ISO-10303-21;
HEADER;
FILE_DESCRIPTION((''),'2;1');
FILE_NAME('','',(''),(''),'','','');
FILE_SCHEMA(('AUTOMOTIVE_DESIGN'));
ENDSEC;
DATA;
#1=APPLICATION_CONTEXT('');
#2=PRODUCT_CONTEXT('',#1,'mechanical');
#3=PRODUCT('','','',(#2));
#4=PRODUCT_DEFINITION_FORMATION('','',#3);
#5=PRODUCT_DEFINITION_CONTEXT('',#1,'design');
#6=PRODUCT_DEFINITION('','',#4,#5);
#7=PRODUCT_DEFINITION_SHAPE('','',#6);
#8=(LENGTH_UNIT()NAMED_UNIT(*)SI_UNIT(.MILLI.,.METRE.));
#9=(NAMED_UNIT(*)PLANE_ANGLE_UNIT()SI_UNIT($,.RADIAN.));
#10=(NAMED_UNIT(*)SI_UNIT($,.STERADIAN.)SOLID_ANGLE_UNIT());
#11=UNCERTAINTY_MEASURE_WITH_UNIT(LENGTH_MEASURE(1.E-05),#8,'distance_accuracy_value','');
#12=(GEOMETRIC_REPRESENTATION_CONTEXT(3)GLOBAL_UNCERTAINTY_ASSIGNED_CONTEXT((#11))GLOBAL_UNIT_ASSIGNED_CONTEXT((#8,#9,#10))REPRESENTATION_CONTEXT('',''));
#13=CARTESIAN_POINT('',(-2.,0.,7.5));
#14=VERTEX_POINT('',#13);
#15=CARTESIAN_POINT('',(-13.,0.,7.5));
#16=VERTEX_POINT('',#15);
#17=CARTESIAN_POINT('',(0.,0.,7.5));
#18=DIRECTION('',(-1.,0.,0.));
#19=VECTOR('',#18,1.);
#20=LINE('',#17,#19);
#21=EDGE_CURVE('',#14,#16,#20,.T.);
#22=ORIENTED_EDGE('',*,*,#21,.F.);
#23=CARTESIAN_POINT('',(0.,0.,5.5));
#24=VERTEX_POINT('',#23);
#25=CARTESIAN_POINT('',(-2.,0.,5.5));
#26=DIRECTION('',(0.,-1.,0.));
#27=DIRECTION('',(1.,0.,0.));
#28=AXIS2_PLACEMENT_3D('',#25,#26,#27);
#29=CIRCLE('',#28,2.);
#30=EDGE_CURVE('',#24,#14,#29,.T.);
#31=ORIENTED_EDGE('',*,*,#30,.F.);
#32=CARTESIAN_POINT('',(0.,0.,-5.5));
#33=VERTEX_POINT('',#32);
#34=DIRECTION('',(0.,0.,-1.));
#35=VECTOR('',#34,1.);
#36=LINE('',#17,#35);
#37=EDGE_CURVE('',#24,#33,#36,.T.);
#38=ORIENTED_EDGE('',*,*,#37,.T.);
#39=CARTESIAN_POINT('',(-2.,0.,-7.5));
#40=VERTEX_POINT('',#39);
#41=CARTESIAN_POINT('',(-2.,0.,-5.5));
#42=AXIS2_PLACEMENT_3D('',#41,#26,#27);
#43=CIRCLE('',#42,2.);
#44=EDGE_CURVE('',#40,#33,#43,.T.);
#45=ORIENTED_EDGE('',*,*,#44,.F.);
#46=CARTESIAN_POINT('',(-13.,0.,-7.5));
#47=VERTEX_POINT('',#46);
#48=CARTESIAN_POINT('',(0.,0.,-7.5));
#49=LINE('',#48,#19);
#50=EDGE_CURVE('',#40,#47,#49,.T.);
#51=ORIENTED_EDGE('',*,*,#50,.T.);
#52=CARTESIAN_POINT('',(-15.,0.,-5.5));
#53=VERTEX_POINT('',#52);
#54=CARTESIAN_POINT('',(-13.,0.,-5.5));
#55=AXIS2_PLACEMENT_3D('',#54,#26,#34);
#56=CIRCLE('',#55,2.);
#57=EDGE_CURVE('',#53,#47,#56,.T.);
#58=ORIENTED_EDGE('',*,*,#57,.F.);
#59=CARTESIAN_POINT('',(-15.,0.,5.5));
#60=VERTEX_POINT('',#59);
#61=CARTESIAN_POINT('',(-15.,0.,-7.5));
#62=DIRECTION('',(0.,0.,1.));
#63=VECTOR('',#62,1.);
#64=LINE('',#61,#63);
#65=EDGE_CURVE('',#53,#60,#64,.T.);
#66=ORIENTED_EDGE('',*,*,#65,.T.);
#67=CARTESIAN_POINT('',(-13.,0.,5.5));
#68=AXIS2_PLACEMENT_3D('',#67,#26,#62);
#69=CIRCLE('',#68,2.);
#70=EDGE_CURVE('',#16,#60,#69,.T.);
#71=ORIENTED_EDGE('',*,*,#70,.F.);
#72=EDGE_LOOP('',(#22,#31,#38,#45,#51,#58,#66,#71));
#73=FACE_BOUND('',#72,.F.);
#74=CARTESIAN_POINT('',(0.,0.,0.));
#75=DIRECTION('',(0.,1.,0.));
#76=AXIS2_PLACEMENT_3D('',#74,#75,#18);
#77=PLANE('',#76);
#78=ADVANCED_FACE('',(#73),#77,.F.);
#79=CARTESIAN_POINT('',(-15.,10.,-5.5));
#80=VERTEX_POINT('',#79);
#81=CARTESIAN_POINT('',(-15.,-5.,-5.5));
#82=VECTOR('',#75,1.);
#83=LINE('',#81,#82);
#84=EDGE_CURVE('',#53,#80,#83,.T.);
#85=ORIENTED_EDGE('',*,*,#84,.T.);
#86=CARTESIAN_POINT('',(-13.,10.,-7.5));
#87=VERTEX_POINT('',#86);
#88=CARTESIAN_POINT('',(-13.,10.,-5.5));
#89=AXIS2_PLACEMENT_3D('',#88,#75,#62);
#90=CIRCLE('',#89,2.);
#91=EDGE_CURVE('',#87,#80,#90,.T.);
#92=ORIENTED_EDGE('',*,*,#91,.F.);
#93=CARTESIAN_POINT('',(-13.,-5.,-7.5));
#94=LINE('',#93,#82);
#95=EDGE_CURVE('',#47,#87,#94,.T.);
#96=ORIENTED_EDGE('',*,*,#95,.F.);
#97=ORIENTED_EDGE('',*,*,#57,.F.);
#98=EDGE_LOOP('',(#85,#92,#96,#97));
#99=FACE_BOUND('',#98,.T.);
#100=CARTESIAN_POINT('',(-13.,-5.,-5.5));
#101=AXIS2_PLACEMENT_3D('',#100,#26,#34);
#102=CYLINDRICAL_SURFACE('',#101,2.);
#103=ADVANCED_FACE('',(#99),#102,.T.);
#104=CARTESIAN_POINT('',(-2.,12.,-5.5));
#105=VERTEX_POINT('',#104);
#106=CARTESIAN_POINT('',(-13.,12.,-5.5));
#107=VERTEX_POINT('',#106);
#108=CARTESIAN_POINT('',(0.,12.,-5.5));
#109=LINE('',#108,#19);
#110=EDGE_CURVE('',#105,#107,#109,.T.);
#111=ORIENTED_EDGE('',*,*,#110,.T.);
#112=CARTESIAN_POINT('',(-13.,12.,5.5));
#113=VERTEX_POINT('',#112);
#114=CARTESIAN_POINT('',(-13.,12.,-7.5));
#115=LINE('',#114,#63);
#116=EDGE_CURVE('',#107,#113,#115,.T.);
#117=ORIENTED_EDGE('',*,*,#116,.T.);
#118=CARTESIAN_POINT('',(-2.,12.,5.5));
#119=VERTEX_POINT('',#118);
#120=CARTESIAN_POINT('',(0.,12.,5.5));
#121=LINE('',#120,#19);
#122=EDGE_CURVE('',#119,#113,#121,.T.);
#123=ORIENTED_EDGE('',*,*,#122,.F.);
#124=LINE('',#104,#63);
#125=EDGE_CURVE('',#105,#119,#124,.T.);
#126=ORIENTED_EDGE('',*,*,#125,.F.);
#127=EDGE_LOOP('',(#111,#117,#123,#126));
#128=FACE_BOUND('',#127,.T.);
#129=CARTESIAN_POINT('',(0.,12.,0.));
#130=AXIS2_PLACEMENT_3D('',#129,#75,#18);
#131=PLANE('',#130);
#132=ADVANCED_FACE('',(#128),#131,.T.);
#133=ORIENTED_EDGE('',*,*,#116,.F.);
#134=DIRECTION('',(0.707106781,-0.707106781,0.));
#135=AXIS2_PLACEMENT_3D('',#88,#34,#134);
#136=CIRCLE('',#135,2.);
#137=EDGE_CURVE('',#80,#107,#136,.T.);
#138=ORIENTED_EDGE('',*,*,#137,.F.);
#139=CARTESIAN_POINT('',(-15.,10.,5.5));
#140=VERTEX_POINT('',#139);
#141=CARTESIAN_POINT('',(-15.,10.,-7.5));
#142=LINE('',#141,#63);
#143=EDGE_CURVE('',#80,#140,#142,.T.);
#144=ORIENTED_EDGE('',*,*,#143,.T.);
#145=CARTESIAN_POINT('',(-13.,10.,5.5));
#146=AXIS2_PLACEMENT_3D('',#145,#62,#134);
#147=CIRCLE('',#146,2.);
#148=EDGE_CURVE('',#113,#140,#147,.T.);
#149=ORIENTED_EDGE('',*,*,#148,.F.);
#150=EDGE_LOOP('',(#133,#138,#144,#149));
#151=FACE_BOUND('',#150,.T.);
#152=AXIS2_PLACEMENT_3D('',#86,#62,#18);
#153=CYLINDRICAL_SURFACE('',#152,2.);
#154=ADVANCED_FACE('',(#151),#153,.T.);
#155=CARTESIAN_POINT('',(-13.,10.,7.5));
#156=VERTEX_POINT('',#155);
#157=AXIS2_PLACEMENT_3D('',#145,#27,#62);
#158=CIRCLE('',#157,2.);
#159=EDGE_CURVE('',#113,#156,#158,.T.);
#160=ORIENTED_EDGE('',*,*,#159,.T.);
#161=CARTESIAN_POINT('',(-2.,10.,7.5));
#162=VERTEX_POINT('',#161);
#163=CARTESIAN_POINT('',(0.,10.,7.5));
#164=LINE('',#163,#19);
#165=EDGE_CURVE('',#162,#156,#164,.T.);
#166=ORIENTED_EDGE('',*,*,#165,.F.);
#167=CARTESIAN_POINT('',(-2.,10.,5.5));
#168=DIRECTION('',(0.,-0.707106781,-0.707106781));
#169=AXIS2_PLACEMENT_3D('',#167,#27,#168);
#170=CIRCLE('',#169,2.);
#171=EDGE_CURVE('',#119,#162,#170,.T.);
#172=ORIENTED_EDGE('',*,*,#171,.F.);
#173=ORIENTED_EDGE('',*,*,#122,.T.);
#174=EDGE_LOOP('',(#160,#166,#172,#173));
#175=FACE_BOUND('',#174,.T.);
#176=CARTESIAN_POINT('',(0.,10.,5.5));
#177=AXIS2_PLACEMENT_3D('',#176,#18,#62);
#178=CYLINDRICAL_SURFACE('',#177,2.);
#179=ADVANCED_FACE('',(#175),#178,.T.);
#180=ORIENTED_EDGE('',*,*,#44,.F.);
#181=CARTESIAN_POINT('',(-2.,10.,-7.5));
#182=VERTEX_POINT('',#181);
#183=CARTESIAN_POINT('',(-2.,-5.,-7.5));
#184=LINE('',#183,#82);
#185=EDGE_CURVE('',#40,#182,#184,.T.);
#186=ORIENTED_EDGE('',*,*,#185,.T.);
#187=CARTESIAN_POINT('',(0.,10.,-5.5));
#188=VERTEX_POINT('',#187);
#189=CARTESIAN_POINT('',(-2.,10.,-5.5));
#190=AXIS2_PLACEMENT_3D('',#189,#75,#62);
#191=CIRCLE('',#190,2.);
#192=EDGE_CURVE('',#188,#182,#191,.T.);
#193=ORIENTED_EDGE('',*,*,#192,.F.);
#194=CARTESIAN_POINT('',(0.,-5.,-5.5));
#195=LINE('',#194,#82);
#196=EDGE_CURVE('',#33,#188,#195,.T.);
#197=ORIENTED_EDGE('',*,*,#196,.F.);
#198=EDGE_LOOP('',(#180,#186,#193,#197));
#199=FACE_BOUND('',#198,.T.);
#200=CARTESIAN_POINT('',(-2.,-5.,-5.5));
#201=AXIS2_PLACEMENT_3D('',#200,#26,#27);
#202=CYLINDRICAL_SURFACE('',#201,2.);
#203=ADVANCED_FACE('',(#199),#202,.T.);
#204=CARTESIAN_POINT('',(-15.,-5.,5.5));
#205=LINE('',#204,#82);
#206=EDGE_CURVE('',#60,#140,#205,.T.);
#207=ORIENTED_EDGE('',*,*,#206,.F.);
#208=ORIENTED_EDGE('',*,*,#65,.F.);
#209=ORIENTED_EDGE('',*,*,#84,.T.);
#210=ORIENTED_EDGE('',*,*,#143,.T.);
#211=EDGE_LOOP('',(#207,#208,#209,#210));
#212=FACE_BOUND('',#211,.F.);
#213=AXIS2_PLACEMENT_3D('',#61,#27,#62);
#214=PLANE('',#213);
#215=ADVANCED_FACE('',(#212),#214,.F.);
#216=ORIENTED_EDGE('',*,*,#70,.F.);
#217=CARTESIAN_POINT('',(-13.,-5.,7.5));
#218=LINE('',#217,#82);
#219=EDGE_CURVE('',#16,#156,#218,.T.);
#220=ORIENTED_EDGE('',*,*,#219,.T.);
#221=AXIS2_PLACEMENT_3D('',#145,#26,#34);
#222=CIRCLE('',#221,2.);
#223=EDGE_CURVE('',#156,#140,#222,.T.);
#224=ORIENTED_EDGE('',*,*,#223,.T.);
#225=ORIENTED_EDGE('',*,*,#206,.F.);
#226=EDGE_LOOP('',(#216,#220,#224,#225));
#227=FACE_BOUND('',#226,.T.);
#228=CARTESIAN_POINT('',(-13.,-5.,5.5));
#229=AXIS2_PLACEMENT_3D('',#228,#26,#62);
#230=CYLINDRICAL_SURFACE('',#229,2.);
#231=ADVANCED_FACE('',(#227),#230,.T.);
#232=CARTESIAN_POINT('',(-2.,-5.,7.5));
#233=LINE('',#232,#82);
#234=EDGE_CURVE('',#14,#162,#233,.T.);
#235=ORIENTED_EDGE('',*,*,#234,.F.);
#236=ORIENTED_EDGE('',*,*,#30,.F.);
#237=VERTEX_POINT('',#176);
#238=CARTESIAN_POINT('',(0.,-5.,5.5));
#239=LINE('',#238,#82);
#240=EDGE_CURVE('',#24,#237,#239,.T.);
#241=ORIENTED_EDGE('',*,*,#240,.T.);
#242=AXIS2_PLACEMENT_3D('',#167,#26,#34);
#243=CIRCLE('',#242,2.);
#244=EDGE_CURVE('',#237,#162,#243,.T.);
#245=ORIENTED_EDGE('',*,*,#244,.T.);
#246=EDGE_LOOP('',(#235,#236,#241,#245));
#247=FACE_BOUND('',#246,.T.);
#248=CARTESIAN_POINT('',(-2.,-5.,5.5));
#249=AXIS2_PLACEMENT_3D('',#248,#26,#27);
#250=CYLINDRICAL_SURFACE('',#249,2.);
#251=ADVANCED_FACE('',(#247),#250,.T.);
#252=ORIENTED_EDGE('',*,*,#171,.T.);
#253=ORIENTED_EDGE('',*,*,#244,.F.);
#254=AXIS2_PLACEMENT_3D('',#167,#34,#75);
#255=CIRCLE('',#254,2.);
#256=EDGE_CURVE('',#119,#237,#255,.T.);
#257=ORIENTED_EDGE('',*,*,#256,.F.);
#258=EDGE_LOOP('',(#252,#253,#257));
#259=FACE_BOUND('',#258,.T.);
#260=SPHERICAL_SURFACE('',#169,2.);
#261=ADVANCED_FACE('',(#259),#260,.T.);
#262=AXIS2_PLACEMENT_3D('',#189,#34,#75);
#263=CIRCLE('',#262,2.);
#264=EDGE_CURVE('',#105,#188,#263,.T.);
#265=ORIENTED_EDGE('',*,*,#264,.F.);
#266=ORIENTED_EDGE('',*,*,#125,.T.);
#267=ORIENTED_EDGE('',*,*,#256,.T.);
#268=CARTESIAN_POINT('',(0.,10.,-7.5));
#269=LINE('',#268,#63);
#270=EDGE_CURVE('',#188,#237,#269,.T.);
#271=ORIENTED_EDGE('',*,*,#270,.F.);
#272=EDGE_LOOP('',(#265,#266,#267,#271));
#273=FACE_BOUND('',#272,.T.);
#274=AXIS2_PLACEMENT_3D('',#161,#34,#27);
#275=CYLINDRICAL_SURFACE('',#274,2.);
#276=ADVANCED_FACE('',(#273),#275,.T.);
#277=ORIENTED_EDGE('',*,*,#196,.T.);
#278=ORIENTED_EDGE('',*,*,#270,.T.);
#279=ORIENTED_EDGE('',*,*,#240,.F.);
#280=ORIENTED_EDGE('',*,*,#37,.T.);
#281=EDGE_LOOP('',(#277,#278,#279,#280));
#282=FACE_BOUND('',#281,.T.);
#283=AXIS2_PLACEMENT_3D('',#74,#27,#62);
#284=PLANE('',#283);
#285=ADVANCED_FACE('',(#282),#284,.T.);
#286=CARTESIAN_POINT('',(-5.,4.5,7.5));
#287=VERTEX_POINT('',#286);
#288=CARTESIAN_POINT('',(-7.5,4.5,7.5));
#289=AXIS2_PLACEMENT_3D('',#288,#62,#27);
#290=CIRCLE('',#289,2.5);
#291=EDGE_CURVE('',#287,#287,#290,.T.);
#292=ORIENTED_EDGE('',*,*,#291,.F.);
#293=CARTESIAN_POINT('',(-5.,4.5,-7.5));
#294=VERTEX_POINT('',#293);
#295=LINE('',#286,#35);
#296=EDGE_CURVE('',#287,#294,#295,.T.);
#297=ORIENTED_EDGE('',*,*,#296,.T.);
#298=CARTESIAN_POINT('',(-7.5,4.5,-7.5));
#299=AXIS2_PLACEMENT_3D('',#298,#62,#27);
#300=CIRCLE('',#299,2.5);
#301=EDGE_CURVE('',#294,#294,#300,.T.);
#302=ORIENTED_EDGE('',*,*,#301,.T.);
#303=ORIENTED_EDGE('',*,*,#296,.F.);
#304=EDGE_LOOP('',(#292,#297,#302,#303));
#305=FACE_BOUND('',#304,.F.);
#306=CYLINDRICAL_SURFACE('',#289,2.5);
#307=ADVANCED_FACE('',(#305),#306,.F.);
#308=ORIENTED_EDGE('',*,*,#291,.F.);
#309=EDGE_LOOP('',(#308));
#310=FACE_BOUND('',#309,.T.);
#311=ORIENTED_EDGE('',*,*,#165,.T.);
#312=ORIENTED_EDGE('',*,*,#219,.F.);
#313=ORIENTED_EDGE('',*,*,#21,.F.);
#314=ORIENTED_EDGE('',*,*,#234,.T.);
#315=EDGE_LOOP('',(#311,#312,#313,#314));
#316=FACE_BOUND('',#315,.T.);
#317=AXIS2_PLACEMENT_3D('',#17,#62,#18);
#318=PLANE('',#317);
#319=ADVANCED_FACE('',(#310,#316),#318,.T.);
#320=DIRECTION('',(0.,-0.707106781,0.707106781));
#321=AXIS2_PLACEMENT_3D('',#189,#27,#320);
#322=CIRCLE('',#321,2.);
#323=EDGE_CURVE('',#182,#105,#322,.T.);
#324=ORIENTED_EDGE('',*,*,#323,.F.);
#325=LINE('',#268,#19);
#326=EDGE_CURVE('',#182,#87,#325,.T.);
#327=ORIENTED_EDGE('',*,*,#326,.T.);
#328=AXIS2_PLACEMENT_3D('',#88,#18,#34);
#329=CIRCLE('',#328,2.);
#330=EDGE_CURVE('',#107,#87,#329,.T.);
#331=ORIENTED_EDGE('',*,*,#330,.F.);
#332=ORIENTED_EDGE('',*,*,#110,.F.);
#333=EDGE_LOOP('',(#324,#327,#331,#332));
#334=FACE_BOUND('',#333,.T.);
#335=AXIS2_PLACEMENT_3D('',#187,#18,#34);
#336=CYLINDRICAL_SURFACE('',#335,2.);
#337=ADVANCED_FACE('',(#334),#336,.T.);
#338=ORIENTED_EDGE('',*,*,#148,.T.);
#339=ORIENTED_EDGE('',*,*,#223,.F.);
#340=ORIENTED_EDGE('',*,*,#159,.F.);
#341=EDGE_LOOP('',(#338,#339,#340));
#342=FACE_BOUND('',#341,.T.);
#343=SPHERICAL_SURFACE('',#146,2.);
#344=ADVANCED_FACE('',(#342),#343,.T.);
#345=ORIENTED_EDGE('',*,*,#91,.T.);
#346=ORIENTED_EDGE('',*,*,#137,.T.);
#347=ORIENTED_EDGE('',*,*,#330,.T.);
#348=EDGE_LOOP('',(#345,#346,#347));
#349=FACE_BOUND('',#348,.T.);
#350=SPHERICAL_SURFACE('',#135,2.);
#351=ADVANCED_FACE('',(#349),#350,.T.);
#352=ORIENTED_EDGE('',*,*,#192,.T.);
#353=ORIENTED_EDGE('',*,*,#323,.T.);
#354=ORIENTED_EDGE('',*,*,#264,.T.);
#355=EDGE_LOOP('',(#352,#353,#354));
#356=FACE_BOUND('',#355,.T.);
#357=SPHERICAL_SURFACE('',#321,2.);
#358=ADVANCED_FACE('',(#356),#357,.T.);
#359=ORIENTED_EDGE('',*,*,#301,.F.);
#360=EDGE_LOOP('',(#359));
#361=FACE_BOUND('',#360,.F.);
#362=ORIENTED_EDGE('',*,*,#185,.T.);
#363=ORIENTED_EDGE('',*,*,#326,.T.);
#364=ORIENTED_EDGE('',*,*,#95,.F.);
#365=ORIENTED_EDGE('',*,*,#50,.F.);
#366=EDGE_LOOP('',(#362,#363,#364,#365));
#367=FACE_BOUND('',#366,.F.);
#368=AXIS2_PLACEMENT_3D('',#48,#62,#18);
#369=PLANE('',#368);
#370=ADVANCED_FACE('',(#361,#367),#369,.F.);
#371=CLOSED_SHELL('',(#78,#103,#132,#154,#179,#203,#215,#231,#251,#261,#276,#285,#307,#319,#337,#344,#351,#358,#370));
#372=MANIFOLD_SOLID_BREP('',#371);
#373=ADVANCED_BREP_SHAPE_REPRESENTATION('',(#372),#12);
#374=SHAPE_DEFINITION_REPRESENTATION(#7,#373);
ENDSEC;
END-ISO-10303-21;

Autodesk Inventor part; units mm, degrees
ref_plane "YZ Plane" through (0, 0, 0) normal (1, 0, 0) x (0, 1, 0)
ref_plane "XZ Plane" through (0, 0, 0) normal (0, 1, 0) x (-1, 0, 0)
ref_plane "XY Plane" through (0, 0, 0) normal (0, 0, 1) x (1, 0, 0)
sketch "Sketch1" plane through (0, 0, 0) normal (0, 1, 0) x (-1, 0, 0)
  point P0 (0, 0)
sketch "Sketch2" plane through (0, 0, 0) normal (0, 1, 0) x (-1, 0, 0)
  line L0 (0, 0) -> (0, -7.5)
  line L1 (0, 0) -> (0, 7.5)
  line L2 (0, 7.5) -> (15, 7.5)
  line L3 (0, -7.5) -> (15, -7.5)
  line L4 (15, -7.5) -> (15, 7.5)
  dimension "d0" = 7.5
  dimension "d1" = 7.5
  dimension "d2" = 15
extrude "Extrusion1" add sketch "Sketch2" along normal blind 12
sketch "Sketch3" plane through (-15, 0, 7.5) normal (0, 0, 1) x (1, 0, 0)
  line L0 (0, 0) -> (0, 12) projected
  circle A0 centre (7.5, 4.5) radius 2.5
  line L1 (0, 12) -> (15, 12) projected
  point P0 (15, 0)
  dimension "d6" = 5
  dimension "d12" = 7.5
fillet "Fillet1" radius 2 4 edges at (0, 12, -3.75) (-15, 12, 0) (-7.5, 12, 7.5) (-7.5, 12, -7.5)
extrude "Extrusion2" cut sketch "Sketch3" against normal blind 15
fillet "Fillet2" radius 2 6 edges at (-14.4142, 11.4142, 6.9142) (-15, 5, 7.5) (-0.5858, 11.4142, 6.9142) (0, 5, 7.5) (-14.4142, 11.4142, -6.9142) (-15, 5, -7.5)
fillet "Fillet3" radius 2 2 edges at (-0.5858, 11.4142, -6.9142) (0, 5, -7.5)
properties part number "Connector"
